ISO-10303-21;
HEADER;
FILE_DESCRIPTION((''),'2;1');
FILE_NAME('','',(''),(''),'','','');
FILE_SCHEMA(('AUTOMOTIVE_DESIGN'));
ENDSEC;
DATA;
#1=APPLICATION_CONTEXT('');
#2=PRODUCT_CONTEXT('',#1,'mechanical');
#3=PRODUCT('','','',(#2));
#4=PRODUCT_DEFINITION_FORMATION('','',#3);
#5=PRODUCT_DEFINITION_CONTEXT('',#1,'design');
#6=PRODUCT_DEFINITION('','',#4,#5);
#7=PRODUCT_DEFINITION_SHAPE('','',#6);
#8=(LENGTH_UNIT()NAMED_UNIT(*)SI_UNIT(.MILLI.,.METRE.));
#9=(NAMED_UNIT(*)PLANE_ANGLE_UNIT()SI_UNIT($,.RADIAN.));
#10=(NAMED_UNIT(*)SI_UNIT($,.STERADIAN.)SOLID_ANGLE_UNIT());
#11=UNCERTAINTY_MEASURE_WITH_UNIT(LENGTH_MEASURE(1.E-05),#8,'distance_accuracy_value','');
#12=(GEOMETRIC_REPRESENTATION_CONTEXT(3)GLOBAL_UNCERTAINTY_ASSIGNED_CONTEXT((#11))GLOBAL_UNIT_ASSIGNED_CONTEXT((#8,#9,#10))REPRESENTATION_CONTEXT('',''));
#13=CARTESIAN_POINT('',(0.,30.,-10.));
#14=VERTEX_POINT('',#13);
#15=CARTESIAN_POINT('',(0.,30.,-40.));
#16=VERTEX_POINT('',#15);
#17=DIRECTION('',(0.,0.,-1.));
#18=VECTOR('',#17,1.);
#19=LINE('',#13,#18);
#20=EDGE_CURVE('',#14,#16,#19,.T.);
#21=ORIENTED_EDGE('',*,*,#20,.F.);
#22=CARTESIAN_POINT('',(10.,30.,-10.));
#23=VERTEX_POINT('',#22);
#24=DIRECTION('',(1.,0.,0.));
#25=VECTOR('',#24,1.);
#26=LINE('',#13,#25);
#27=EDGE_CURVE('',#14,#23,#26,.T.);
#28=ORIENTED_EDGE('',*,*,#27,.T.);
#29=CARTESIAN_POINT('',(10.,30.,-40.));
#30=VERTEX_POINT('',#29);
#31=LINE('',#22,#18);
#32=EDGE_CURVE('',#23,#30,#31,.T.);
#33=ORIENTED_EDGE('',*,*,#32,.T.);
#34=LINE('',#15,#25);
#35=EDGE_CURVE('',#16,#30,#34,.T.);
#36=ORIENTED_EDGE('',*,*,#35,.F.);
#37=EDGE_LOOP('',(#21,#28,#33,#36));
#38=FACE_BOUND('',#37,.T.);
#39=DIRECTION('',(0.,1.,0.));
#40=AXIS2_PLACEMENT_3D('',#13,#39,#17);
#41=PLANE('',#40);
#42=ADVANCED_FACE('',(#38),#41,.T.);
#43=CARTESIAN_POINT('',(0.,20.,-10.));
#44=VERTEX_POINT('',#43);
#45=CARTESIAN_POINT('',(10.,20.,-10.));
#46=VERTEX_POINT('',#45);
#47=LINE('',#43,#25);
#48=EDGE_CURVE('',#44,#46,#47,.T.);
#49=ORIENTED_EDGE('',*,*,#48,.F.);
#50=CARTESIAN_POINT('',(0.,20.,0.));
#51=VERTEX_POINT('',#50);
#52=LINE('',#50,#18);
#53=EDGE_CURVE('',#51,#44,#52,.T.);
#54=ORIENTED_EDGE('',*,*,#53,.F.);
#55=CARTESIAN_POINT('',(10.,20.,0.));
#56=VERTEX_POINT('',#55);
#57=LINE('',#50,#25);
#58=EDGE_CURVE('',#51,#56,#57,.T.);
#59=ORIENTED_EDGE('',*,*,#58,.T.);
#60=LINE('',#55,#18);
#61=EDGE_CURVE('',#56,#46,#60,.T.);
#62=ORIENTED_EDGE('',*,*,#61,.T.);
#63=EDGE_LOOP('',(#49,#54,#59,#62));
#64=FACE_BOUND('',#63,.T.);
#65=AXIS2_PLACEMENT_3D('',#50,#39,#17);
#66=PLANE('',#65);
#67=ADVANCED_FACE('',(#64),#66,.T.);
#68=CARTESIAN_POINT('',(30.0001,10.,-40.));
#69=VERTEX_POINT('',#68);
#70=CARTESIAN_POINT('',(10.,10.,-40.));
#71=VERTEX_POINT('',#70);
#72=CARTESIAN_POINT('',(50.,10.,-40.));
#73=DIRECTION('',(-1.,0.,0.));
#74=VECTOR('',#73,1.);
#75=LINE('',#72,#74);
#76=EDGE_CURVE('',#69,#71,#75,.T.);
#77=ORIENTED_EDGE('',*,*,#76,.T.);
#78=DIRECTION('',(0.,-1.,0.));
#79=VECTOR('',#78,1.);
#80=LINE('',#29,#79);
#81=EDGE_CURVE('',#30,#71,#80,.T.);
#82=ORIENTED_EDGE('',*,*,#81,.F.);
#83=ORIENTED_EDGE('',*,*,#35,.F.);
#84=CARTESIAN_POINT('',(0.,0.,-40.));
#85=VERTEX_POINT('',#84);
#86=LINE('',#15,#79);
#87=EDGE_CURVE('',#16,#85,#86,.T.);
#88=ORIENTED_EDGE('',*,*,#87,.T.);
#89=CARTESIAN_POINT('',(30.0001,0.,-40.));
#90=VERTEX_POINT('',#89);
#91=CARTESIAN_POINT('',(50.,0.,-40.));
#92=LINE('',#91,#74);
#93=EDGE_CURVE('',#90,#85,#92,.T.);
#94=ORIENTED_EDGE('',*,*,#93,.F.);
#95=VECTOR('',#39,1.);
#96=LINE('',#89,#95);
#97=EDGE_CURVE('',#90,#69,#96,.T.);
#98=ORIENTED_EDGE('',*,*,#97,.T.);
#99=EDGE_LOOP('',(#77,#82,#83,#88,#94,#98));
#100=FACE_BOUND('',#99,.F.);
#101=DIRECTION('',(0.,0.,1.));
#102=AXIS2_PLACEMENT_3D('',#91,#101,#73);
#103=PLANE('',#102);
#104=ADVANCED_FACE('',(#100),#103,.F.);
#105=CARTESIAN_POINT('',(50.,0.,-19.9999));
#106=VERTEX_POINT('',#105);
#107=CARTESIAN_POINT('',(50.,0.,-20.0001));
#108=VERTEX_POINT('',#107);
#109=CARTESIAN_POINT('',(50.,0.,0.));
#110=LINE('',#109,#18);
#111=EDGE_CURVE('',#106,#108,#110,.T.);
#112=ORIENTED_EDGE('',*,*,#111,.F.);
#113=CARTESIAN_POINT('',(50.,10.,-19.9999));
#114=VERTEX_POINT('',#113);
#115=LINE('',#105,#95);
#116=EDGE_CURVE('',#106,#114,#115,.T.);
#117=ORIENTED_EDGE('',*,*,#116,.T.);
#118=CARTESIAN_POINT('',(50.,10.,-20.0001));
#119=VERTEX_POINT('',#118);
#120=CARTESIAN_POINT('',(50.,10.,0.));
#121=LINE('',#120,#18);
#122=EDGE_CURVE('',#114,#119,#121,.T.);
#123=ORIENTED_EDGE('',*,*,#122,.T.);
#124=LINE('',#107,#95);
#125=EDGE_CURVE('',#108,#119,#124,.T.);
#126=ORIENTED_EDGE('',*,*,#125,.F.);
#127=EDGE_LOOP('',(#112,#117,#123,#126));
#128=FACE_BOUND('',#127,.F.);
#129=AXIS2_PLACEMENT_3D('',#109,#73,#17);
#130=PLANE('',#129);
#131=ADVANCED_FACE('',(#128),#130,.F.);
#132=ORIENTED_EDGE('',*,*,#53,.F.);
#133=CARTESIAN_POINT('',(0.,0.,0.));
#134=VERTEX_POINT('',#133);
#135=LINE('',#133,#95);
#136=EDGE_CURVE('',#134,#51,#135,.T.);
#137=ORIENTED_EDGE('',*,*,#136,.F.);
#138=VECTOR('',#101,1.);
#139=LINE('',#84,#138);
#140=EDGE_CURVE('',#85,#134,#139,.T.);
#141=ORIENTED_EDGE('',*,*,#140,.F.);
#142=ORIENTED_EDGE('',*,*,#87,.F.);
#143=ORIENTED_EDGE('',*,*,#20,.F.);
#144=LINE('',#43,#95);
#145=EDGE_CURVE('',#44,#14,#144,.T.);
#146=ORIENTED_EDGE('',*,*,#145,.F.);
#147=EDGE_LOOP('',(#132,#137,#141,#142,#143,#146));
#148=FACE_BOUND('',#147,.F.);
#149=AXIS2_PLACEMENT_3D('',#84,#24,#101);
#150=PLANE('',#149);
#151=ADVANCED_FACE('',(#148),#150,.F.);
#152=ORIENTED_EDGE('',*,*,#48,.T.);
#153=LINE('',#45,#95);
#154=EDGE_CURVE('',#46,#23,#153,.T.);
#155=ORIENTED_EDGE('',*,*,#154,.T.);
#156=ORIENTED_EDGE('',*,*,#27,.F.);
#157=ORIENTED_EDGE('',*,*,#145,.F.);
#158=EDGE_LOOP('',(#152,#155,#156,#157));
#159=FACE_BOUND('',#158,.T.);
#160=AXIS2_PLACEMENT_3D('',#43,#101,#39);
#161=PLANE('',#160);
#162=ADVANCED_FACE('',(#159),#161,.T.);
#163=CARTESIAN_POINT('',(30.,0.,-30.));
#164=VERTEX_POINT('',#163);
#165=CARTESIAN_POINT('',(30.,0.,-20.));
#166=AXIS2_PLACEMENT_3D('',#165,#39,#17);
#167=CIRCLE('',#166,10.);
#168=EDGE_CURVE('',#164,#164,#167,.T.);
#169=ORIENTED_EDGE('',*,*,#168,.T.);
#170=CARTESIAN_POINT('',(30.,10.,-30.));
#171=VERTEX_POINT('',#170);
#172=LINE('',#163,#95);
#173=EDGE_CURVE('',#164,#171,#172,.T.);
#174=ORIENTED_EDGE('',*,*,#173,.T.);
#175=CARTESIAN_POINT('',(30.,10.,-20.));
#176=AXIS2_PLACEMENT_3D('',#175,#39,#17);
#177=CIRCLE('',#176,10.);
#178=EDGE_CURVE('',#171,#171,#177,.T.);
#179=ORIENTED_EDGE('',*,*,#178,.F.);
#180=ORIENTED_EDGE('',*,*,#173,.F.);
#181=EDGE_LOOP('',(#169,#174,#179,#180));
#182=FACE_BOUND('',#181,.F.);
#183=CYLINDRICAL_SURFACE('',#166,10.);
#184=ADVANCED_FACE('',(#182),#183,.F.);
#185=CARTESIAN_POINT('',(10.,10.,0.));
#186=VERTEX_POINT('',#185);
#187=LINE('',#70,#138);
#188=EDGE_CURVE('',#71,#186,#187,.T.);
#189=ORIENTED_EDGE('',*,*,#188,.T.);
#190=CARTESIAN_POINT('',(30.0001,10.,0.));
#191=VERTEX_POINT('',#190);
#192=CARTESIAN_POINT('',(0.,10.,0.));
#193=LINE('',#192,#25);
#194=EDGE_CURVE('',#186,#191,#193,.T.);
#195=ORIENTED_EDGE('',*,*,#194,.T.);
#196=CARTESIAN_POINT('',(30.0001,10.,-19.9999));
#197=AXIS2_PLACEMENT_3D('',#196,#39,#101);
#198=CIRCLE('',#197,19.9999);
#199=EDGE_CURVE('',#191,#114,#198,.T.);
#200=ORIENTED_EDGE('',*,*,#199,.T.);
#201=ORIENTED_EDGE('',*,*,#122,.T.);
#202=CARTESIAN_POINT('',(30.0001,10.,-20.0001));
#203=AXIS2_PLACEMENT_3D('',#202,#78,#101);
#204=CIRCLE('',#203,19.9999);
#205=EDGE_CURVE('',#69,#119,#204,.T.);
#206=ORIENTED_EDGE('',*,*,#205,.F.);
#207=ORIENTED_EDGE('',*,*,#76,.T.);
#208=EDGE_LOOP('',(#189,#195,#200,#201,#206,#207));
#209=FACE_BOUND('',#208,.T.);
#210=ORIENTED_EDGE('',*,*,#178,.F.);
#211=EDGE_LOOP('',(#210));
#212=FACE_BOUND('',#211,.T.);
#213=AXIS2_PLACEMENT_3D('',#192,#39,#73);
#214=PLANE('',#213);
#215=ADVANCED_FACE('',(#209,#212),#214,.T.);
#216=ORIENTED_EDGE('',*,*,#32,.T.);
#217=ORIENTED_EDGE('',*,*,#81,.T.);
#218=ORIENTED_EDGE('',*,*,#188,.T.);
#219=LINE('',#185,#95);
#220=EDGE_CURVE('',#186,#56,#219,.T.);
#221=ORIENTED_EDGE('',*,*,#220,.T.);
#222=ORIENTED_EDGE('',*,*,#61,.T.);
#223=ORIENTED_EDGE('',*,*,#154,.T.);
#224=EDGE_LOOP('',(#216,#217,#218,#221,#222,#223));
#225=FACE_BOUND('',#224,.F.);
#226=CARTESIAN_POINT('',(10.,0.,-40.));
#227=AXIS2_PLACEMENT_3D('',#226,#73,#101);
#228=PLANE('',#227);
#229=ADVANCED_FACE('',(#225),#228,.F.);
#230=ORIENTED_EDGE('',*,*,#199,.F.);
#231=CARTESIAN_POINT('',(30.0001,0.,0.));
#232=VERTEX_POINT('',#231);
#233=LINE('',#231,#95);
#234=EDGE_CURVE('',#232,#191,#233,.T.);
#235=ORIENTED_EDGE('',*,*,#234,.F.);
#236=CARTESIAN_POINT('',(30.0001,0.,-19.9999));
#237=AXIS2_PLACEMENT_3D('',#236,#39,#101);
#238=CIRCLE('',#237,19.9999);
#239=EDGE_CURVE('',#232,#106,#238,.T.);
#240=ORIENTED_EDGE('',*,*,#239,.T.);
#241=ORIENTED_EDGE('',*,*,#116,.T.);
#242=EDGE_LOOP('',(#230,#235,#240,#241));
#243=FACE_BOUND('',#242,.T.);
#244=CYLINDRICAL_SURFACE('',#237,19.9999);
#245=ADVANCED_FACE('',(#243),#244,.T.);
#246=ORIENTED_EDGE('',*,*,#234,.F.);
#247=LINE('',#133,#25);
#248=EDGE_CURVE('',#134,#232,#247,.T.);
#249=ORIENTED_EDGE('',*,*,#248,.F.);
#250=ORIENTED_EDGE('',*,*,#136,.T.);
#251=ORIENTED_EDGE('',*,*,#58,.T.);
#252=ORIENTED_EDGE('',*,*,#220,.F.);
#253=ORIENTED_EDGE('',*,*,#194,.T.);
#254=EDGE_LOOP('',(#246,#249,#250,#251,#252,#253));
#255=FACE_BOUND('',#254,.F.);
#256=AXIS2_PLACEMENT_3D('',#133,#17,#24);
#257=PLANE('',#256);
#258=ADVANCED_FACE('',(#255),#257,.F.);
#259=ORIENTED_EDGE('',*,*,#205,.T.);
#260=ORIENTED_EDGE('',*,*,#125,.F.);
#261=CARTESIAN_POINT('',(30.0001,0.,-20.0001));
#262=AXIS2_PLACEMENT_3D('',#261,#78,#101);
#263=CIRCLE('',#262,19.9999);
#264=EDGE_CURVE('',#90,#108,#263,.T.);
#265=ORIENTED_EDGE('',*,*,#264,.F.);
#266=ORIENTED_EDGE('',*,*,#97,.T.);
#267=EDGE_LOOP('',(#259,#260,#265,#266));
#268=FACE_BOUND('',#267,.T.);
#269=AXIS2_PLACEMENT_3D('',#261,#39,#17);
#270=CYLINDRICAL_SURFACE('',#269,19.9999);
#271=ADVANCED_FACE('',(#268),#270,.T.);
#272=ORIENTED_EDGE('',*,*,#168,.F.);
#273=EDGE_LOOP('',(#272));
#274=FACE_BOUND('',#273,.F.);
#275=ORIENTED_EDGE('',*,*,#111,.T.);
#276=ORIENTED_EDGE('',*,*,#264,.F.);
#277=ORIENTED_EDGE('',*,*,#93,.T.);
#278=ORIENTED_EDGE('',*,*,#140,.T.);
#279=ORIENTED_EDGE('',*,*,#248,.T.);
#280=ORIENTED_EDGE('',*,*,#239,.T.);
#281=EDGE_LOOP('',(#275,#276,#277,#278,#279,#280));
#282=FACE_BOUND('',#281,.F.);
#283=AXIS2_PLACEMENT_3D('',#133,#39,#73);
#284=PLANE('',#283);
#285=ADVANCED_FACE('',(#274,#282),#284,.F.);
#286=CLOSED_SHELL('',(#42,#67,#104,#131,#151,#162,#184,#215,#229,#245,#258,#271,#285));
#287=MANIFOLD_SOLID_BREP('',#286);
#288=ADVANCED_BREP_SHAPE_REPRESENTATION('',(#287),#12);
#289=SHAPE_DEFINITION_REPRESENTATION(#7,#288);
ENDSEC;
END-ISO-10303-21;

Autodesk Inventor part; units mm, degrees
ref_plane "YZ Plane" through (0, 0, 0) normal (1, 0, 0) x (0, 1, 0)
ref_plane "XZ Plane" through (0, 0, 0) normal (0, 1, 0) x (-1, 0, 0)
ref_plane "XY Plane" through (0, 0, 0) normal (0, 0, 1) x (1, 0, 0)
sketch "草圖1" plane through (0, 0, 0) normal (0, 1, 0) x (-1, 0, 0)
  line L0 (0, 0) -> (-50, 0)
  line L1 (-50, 0) -> (-50, -40)
  line L2 (-50, -40) -> (0, -40)
  line L3 (0, -40) -> (0, 0)
  dimension "d0" = 50
  dimension "d1" = 40
extrude "擠出1" add sketch "草圖1" along normal blind 10
sketch "草圖2" plane through (0, 0, -40) normal (-1, 0, 0) x (0, 0, 1)
  line L0 (0, 0) -> (0, 10) projected
  line L1 (0, 10) -> (40, 10)
  line L2 (40, 10) -> (40, 20)
  line L3 (40, 20) -> (0, 20)
  line L4 (0, 20) -> (0, 10)
  line L5 (0, 20) -> (30, 20)
  line L6 (30, 20) -> (30, 30)
  line L7 (30, 30) -> (0, 30)
  line L8 (0, 30) -> (0, 20)
  point P0 (40, 0)
  dimension "d4" = 30
  dimension "d5" = 40
  dimension "d6" = 10
  dimension "d7" = 10
extrude "擠出2" add sketch "草圖2" against normal blind 10
fillet "圓角1" radius 20 2 edges at (50, 5, 0) (50, 5, -40)
hole "孔1" at (30, 0, -20) direction (0, 1, 0) diameter 20 depth 10 tip angle 118
properties part number "35"
